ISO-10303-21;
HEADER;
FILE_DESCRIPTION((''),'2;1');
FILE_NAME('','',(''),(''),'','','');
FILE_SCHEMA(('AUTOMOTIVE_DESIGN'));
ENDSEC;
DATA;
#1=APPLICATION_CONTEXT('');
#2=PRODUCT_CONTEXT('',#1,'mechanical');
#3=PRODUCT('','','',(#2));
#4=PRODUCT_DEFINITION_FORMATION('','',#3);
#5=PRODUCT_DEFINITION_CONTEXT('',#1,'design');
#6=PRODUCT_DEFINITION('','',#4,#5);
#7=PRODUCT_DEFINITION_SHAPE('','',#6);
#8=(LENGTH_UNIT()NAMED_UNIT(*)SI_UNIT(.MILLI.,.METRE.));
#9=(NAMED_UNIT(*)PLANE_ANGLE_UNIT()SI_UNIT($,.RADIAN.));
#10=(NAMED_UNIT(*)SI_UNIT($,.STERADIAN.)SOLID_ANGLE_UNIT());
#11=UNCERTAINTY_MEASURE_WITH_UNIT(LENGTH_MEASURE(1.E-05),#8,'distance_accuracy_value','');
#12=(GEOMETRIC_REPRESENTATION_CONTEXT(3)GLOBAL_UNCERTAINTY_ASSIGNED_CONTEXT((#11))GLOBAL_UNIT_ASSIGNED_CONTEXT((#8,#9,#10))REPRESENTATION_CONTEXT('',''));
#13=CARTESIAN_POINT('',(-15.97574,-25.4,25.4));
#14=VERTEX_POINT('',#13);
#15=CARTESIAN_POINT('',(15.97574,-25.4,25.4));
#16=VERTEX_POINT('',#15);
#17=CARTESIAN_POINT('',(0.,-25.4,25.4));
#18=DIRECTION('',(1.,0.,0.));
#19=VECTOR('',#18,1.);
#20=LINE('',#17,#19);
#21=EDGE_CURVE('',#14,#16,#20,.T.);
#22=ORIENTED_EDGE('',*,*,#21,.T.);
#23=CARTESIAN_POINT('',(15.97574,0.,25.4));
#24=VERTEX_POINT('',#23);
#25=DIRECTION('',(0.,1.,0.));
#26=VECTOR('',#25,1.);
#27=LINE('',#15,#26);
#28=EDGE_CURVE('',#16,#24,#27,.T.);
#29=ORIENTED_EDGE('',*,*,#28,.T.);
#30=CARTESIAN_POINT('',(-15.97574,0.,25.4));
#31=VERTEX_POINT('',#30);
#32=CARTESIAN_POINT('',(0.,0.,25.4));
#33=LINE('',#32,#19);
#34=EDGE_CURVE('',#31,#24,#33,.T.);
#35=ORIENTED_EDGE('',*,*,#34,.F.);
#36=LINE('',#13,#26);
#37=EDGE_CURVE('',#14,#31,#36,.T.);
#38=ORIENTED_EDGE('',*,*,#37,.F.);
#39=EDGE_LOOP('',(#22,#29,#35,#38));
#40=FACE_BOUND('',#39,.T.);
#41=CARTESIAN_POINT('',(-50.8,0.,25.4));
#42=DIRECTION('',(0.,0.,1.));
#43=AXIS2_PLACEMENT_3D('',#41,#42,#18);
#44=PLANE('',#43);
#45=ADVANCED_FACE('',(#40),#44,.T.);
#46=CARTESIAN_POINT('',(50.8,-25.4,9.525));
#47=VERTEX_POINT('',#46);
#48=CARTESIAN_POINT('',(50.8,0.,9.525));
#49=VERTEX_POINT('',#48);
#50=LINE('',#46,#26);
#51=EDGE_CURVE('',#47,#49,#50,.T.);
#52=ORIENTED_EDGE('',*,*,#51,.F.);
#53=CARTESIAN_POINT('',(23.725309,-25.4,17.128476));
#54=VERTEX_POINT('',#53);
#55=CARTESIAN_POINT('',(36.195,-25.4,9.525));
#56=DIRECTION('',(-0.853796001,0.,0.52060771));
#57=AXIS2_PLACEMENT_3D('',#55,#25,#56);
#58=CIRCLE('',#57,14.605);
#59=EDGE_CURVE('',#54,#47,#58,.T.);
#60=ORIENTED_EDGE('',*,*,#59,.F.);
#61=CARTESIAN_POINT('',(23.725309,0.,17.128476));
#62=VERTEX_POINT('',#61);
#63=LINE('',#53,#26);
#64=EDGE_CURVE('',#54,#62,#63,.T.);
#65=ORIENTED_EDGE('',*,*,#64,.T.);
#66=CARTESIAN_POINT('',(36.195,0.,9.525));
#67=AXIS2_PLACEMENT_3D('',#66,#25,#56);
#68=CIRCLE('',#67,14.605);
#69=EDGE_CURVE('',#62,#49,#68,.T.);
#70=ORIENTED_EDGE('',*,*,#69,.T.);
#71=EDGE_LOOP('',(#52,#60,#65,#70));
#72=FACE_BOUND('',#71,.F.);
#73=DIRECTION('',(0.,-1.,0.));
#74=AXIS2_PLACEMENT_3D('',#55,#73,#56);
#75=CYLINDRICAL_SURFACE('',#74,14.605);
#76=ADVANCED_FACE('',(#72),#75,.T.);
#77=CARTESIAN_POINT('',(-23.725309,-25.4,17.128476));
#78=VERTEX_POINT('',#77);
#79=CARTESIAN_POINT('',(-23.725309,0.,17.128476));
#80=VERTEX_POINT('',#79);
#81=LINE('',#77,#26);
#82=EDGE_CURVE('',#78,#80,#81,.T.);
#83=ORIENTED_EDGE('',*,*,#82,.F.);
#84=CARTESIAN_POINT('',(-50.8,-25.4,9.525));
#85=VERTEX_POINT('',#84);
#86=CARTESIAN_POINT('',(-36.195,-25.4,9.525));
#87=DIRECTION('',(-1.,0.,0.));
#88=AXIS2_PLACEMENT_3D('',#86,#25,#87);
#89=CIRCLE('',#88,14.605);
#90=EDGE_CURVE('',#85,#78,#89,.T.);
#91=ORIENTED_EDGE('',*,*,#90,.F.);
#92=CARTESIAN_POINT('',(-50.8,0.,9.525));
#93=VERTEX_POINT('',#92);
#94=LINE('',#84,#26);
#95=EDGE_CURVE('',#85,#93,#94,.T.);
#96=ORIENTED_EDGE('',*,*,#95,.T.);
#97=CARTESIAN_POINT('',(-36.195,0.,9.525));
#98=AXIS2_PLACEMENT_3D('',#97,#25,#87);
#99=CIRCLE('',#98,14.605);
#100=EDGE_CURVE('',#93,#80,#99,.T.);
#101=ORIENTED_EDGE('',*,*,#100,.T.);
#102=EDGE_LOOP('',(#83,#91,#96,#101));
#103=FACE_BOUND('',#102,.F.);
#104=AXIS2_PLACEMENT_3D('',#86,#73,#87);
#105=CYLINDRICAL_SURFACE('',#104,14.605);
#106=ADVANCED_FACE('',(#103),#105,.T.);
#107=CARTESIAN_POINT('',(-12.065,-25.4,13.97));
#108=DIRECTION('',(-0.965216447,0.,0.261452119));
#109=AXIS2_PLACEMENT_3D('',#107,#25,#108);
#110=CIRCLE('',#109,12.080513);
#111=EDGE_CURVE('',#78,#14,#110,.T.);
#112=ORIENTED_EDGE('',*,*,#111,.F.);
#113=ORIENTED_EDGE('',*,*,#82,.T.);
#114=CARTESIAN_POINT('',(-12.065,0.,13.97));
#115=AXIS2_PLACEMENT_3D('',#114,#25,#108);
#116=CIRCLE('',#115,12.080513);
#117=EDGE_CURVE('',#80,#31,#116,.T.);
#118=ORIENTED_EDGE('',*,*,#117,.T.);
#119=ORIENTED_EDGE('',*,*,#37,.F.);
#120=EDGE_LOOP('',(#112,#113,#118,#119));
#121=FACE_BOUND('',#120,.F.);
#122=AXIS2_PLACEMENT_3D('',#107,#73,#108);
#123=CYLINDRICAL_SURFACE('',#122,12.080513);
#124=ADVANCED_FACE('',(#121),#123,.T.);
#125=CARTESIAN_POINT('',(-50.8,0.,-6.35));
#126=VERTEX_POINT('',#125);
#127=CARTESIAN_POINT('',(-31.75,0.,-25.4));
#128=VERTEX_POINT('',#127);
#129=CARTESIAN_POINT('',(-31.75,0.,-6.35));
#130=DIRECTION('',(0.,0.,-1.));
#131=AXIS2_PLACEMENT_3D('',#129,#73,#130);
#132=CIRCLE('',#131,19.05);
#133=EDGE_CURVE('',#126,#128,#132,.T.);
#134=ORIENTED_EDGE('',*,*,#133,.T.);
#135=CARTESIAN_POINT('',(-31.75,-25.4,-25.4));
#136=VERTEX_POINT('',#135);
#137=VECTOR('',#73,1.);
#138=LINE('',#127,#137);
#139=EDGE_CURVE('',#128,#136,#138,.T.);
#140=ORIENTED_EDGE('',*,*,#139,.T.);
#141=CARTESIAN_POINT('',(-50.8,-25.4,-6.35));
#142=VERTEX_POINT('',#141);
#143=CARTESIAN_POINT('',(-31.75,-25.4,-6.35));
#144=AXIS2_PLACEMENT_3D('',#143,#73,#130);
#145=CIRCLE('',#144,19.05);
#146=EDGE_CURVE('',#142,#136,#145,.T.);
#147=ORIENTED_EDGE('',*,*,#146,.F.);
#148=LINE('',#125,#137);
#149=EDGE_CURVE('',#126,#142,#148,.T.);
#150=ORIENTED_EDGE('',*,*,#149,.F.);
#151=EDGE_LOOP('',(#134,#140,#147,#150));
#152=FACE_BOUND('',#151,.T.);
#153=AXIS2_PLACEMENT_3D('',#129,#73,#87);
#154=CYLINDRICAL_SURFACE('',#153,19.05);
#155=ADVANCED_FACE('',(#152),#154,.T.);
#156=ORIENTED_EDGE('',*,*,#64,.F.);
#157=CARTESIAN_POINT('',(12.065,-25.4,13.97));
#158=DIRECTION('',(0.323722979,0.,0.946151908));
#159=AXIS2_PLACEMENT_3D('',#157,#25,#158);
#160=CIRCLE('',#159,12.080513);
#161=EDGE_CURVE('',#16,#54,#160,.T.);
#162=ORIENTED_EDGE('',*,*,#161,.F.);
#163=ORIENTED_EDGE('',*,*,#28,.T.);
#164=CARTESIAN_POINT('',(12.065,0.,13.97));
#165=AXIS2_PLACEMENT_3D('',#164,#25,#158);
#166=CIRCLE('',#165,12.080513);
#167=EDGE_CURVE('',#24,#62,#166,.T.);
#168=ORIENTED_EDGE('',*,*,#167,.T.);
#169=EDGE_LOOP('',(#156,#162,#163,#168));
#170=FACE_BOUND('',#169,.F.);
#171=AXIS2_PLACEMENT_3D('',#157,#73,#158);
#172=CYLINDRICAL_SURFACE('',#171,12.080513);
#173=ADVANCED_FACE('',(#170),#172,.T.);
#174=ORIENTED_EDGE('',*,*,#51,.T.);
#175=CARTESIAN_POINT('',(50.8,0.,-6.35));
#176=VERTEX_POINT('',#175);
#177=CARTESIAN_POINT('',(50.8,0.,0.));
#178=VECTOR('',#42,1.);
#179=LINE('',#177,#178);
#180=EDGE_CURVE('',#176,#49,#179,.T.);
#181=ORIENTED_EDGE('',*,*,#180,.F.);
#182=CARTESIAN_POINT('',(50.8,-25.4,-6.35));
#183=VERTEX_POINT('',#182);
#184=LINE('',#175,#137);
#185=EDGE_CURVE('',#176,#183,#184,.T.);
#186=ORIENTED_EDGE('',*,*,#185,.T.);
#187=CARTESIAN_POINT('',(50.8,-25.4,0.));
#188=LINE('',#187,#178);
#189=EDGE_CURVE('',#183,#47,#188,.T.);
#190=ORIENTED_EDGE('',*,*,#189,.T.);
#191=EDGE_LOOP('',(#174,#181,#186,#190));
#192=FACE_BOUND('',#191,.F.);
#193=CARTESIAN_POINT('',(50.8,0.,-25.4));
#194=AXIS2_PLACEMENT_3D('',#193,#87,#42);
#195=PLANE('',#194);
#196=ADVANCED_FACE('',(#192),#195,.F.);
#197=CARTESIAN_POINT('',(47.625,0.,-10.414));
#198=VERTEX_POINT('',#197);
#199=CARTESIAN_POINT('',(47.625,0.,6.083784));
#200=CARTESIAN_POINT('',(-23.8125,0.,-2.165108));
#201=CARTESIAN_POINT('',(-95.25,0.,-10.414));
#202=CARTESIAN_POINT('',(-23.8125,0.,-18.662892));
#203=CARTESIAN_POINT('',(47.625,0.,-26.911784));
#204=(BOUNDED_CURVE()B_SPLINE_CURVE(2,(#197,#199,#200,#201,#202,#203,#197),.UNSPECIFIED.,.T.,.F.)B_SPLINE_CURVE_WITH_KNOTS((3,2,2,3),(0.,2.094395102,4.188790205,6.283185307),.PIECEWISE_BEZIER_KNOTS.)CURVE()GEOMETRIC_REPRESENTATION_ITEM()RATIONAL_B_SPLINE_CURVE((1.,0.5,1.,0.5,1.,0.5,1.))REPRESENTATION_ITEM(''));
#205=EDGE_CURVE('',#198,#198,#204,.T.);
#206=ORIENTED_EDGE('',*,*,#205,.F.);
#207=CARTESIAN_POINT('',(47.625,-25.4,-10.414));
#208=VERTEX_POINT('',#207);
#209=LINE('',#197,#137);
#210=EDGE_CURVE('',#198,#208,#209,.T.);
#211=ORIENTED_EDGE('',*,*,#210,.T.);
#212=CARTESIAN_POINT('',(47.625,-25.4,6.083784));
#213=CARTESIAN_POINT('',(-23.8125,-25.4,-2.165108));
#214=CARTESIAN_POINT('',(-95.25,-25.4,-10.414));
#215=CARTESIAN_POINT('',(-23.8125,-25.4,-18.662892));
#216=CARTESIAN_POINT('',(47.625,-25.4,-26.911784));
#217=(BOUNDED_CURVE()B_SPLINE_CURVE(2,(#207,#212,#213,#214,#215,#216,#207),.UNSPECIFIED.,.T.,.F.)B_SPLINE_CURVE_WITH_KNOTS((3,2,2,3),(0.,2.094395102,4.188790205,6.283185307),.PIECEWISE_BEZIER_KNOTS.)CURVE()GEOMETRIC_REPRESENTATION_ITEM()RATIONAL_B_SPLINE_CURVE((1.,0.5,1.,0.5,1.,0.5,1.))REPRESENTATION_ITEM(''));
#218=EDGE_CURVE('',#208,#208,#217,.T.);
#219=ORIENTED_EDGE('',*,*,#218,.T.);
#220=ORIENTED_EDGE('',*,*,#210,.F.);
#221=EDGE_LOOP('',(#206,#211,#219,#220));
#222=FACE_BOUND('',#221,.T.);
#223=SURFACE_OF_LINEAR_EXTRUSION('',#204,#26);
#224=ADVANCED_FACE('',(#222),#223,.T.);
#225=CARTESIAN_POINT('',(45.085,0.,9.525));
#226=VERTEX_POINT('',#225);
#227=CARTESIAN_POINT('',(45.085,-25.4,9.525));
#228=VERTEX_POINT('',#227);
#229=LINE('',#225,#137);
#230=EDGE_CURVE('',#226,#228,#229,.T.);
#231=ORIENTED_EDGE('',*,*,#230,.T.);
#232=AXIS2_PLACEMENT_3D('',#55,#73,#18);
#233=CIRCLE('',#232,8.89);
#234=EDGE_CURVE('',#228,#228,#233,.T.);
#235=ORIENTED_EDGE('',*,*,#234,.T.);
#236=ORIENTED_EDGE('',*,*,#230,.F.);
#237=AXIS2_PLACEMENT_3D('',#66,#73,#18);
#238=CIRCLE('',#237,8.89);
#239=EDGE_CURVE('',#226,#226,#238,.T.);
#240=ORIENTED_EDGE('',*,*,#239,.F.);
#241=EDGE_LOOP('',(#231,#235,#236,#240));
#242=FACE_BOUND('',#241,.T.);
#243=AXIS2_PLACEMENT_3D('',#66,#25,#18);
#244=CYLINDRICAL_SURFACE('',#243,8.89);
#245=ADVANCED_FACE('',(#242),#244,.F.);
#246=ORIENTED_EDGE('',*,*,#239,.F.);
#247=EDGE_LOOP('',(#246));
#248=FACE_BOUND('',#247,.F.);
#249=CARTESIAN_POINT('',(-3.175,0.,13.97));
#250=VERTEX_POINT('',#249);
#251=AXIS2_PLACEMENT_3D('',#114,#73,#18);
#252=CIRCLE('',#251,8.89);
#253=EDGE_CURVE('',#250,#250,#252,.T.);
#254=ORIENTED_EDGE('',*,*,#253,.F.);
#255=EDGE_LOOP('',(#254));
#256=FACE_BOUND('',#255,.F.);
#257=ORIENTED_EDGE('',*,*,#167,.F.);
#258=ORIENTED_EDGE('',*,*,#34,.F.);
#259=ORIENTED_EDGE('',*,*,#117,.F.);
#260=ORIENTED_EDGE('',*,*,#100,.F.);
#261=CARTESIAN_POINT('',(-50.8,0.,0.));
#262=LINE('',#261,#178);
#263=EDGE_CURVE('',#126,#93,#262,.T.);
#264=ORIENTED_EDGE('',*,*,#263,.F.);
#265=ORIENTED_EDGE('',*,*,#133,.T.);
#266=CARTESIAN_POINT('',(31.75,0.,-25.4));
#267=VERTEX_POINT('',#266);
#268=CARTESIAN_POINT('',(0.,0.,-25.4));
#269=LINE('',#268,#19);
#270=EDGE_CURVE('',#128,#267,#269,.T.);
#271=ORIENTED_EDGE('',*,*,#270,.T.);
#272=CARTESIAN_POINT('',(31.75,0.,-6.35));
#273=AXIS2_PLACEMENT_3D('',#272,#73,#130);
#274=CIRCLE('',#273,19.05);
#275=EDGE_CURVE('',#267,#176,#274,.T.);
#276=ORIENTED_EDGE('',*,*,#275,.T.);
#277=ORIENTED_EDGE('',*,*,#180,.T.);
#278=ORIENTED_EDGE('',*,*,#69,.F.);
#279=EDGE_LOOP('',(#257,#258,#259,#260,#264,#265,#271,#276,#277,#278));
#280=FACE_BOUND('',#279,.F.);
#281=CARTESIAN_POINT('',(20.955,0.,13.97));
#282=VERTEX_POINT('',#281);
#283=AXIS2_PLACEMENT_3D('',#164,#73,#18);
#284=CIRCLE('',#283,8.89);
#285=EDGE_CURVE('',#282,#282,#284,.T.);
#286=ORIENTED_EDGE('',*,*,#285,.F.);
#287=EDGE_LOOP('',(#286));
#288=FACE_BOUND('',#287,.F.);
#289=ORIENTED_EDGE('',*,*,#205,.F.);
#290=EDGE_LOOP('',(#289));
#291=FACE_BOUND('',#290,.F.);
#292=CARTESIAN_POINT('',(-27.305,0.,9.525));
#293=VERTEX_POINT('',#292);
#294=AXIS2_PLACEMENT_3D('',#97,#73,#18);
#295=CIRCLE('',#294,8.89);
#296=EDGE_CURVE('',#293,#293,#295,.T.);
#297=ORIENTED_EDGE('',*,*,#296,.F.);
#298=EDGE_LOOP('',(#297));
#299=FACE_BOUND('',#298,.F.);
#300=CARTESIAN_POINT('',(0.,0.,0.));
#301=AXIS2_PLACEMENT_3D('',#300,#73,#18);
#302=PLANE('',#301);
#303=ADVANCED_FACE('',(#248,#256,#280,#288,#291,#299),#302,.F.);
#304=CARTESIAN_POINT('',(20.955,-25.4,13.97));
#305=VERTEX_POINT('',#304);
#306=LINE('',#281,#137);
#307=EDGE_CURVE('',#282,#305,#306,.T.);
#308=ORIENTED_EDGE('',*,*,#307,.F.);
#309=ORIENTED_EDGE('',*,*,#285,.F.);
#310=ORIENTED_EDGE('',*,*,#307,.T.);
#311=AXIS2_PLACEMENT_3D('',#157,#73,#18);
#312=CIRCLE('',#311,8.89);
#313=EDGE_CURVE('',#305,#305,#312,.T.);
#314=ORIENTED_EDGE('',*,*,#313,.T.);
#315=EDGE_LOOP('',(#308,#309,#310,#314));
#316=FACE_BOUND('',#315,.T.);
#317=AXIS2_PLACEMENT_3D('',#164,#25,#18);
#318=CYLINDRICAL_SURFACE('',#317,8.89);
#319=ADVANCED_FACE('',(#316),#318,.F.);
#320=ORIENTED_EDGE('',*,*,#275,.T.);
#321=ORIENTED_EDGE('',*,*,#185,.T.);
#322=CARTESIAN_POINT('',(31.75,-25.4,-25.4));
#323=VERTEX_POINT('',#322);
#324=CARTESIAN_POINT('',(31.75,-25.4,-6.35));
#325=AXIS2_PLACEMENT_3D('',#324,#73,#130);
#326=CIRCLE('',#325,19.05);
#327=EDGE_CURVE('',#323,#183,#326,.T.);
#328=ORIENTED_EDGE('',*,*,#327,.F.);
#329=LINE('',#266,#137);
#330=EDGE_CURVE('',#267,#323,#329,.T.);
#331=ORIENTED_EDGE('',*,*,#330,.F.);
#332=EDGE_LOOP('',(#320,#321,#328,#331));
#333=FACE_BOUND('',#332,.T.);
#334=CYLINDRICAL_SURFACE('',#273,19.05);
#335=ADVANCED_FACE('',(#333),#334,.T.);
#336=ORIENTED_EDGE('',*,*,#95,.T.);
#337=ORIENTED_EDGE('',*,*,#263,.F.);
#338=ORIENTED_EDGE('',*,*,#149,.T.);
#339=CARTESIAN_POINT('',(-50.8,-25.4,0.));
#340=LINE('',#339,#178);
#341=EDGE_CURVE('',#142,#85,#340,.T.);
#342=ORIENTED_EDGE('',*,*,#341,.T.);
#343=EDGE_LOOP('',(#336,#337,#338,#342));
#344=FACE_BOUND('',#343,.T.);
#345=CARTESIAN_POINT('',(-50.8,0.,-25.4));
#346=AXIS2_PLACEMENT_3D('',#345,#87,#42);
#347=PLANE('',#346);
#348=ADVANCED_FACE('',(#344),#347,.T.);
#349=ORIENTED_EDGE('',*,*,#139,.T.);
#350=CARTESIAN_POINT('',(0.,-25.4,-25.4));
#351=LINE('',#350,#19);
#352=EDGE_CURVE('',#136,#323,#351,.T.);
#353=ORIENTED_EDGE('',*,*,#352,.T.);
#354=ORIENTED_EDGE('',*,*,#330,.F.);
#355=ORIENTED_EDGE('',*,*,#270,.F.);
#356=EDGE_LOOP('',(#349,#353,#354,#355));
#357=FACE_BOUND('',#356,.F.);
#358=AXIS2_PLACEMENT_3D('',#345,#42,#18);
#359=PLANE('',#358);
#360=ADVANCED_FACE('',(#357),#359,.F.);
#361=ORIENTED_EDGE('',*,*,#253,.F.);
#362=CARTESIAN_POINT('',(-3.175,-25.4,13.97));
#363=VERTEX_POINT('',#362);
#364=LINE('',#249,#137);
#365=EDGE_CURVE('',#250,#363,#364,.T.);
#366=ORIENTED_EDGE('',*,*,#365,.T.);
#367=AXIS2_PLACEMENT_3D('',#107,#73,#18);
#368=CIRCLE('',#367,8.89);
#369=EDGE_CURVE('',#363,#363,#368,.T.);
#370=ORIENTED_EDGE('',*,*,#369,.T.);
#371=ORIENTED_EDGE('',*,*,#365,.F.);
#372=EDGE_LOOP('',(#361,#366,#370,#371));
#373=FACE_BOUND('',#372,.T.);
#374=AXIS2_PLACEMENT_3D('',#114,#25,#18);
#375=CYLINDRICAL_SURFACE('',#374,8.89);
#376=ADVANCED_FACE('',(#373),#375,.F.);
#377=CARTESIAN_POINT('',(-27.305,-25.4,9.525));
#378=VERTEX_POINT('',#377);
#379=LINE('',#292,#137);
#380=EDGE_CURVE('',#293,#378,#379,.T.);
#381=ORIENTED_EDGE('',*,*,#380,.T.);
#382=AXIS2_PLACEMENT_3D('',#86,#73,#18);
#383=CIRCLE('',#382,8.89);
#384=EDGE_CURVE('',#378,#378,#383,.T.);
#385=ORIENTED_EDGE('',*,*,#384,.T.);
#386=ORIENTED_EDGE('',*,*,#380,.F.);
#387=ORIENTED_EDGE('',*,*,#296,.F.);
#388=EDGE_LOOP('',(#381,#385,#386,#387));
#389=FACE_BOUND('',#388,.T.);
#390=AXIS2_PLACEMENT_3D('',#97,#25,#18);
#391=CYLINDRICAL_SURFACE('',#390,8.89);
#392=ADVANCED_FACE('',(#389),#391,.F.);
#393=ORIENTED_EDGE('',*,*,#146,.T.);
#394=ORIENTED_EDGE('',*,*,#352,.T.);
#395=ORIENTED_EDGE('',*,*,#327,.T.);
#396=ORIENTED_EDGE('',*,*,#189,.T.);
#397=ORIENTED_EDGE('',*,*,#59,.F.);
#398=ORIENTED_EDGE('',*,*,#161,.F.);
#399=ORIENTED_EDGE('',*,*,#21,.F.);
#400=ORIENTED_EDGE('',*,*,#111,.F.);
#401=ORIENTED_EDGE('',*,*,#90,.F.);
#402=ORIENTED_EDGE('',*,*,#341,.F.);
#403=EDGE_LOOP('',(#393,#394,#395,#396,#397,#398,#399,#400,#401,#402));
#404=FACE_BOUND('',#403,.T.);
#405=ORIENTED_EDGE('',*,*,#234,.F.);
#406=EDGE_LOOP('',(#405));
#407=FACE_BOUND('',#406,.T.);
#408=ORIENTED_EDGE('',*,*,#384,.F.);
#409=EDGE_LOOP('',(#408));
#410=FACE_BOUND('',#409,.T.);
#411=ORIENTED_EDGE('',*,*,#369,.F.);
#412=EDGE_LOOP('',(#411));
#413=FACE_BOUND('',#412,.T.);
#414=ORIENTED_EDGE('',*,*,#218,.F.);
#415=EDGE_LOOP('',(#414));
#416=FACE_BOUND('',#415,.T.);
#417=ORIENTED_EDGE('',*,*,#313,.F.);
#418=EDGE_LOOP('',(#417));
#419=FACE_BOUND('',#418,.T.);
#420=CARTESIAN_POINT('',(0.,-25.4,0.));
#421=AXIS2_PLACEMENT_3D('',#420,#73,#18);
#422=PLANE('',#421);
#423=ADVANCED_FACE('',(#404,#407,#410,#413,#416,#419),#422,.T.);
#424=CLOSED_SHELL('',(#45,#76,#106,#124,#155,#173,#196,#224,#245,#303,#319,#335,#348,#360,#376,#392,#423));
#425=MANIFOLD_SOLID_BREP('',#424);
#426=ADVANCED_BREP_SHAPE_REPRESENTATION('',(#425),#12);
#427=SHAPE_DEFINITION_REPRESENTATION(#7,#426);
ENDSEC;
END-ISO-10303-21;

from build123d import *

# Parameters (mm, degrees)
F0_W     = 101.6
F0_H     = 50.8
F0_R     = 8.89
F1_DEPTH = 25.4
F2_R     = 19.05
F4_DEPTH = 25.4


# Not quite as in the source:
# - a feature of the source that left no trace in its solid (it failed there, or was rolled back) is left out


with BuildPart() as f1:
    # F0 (on Front) → F1 (new body)
    with BuildSketch(Plane.XZ):
        Rectangle(F0_W, F0_H)
        with BuildLine():
            add(Edge.make_bspline(
                [(47.625, -10.414), (47.625, 6.0837839421), (-23.8125, -2.165108029), (-95.25, -10.414), (-23.8125, -18.662891971), (47.625, -26.9117839421), (47.625, -10.414)],
                knots=[0, 0, 0, 2.0943951024, 2.0943951024, 4.1887902048, 4.1887902048, 6.2831853072, 6.2831853072, 6.2831853072], degree=2, weights=[1, 0.5, 1, 0.5, 1, 0.5, 1]))
        make_face(mode=Mode.SUBTRACT)
        with Locations((-36.195, 9.525)):
            Circle(F0_R, mode=Mode.SUBTRACT)
        with Locations((-12.065, 13.97)):
            Circle(F0_R, mode=Mode.SUBTRACT)
        with Locations((36.195, 9.525)):
            Circle(F0_R, mode=Mode.SUBTRACT)
        with Locations((12.065, 13.97)):
            Circle(F0_R, mode=Mode.SUBTRACT)
    extrude(amount=F1_DEPTH)

    # F2
    f2_edges = [f1.edges().sort_by_distance(p)[0] for p in [
        (50.8, -12.7, -25.4),
        (-50.8, -12.7, -25.4),
    ]]
    fillet(f2_edges, radius=F2_R)

    # F3 (on face) → F4 (cut)
    with BuildSketch(Plane.XZ.offset(25.4)):
        with BuildLine():
            ThreePointArc((-23.7253094007, 17.1284756105), (-20.880833481, 22.2295316779), (-15.9757395084, 25.4))
            Line((-15.9757395084, 25.4), (-50.8, 25.4))
            Line((-50.8, 25.4), (-50.8, 9.525))
            ThreePointArc((-50.8, 9.525), (-40.1438095547, 23.5860429237), (-23.7253094007, 17.1284756105))
        make_face()
        with BuildLine():
            Line((50.8, 25.4), (15.9757395084, 25.4))
            ThreePointArc((15.9757395084, 25.4), (20.880833481, 22.2295316779), (23.7253094007, 17.1284756105))
            ThreePointArc((23.7253094007, 17.1284756105), (40.1438095547, 23.5860429237), (50.8, 9.525))
            Line((50.8, 9.525), (50.8, 25.4))
        make_face()
    extrude(amount=-F4_DEPTH, mode=Mode.SUBTRACT)


solid = f1.part
